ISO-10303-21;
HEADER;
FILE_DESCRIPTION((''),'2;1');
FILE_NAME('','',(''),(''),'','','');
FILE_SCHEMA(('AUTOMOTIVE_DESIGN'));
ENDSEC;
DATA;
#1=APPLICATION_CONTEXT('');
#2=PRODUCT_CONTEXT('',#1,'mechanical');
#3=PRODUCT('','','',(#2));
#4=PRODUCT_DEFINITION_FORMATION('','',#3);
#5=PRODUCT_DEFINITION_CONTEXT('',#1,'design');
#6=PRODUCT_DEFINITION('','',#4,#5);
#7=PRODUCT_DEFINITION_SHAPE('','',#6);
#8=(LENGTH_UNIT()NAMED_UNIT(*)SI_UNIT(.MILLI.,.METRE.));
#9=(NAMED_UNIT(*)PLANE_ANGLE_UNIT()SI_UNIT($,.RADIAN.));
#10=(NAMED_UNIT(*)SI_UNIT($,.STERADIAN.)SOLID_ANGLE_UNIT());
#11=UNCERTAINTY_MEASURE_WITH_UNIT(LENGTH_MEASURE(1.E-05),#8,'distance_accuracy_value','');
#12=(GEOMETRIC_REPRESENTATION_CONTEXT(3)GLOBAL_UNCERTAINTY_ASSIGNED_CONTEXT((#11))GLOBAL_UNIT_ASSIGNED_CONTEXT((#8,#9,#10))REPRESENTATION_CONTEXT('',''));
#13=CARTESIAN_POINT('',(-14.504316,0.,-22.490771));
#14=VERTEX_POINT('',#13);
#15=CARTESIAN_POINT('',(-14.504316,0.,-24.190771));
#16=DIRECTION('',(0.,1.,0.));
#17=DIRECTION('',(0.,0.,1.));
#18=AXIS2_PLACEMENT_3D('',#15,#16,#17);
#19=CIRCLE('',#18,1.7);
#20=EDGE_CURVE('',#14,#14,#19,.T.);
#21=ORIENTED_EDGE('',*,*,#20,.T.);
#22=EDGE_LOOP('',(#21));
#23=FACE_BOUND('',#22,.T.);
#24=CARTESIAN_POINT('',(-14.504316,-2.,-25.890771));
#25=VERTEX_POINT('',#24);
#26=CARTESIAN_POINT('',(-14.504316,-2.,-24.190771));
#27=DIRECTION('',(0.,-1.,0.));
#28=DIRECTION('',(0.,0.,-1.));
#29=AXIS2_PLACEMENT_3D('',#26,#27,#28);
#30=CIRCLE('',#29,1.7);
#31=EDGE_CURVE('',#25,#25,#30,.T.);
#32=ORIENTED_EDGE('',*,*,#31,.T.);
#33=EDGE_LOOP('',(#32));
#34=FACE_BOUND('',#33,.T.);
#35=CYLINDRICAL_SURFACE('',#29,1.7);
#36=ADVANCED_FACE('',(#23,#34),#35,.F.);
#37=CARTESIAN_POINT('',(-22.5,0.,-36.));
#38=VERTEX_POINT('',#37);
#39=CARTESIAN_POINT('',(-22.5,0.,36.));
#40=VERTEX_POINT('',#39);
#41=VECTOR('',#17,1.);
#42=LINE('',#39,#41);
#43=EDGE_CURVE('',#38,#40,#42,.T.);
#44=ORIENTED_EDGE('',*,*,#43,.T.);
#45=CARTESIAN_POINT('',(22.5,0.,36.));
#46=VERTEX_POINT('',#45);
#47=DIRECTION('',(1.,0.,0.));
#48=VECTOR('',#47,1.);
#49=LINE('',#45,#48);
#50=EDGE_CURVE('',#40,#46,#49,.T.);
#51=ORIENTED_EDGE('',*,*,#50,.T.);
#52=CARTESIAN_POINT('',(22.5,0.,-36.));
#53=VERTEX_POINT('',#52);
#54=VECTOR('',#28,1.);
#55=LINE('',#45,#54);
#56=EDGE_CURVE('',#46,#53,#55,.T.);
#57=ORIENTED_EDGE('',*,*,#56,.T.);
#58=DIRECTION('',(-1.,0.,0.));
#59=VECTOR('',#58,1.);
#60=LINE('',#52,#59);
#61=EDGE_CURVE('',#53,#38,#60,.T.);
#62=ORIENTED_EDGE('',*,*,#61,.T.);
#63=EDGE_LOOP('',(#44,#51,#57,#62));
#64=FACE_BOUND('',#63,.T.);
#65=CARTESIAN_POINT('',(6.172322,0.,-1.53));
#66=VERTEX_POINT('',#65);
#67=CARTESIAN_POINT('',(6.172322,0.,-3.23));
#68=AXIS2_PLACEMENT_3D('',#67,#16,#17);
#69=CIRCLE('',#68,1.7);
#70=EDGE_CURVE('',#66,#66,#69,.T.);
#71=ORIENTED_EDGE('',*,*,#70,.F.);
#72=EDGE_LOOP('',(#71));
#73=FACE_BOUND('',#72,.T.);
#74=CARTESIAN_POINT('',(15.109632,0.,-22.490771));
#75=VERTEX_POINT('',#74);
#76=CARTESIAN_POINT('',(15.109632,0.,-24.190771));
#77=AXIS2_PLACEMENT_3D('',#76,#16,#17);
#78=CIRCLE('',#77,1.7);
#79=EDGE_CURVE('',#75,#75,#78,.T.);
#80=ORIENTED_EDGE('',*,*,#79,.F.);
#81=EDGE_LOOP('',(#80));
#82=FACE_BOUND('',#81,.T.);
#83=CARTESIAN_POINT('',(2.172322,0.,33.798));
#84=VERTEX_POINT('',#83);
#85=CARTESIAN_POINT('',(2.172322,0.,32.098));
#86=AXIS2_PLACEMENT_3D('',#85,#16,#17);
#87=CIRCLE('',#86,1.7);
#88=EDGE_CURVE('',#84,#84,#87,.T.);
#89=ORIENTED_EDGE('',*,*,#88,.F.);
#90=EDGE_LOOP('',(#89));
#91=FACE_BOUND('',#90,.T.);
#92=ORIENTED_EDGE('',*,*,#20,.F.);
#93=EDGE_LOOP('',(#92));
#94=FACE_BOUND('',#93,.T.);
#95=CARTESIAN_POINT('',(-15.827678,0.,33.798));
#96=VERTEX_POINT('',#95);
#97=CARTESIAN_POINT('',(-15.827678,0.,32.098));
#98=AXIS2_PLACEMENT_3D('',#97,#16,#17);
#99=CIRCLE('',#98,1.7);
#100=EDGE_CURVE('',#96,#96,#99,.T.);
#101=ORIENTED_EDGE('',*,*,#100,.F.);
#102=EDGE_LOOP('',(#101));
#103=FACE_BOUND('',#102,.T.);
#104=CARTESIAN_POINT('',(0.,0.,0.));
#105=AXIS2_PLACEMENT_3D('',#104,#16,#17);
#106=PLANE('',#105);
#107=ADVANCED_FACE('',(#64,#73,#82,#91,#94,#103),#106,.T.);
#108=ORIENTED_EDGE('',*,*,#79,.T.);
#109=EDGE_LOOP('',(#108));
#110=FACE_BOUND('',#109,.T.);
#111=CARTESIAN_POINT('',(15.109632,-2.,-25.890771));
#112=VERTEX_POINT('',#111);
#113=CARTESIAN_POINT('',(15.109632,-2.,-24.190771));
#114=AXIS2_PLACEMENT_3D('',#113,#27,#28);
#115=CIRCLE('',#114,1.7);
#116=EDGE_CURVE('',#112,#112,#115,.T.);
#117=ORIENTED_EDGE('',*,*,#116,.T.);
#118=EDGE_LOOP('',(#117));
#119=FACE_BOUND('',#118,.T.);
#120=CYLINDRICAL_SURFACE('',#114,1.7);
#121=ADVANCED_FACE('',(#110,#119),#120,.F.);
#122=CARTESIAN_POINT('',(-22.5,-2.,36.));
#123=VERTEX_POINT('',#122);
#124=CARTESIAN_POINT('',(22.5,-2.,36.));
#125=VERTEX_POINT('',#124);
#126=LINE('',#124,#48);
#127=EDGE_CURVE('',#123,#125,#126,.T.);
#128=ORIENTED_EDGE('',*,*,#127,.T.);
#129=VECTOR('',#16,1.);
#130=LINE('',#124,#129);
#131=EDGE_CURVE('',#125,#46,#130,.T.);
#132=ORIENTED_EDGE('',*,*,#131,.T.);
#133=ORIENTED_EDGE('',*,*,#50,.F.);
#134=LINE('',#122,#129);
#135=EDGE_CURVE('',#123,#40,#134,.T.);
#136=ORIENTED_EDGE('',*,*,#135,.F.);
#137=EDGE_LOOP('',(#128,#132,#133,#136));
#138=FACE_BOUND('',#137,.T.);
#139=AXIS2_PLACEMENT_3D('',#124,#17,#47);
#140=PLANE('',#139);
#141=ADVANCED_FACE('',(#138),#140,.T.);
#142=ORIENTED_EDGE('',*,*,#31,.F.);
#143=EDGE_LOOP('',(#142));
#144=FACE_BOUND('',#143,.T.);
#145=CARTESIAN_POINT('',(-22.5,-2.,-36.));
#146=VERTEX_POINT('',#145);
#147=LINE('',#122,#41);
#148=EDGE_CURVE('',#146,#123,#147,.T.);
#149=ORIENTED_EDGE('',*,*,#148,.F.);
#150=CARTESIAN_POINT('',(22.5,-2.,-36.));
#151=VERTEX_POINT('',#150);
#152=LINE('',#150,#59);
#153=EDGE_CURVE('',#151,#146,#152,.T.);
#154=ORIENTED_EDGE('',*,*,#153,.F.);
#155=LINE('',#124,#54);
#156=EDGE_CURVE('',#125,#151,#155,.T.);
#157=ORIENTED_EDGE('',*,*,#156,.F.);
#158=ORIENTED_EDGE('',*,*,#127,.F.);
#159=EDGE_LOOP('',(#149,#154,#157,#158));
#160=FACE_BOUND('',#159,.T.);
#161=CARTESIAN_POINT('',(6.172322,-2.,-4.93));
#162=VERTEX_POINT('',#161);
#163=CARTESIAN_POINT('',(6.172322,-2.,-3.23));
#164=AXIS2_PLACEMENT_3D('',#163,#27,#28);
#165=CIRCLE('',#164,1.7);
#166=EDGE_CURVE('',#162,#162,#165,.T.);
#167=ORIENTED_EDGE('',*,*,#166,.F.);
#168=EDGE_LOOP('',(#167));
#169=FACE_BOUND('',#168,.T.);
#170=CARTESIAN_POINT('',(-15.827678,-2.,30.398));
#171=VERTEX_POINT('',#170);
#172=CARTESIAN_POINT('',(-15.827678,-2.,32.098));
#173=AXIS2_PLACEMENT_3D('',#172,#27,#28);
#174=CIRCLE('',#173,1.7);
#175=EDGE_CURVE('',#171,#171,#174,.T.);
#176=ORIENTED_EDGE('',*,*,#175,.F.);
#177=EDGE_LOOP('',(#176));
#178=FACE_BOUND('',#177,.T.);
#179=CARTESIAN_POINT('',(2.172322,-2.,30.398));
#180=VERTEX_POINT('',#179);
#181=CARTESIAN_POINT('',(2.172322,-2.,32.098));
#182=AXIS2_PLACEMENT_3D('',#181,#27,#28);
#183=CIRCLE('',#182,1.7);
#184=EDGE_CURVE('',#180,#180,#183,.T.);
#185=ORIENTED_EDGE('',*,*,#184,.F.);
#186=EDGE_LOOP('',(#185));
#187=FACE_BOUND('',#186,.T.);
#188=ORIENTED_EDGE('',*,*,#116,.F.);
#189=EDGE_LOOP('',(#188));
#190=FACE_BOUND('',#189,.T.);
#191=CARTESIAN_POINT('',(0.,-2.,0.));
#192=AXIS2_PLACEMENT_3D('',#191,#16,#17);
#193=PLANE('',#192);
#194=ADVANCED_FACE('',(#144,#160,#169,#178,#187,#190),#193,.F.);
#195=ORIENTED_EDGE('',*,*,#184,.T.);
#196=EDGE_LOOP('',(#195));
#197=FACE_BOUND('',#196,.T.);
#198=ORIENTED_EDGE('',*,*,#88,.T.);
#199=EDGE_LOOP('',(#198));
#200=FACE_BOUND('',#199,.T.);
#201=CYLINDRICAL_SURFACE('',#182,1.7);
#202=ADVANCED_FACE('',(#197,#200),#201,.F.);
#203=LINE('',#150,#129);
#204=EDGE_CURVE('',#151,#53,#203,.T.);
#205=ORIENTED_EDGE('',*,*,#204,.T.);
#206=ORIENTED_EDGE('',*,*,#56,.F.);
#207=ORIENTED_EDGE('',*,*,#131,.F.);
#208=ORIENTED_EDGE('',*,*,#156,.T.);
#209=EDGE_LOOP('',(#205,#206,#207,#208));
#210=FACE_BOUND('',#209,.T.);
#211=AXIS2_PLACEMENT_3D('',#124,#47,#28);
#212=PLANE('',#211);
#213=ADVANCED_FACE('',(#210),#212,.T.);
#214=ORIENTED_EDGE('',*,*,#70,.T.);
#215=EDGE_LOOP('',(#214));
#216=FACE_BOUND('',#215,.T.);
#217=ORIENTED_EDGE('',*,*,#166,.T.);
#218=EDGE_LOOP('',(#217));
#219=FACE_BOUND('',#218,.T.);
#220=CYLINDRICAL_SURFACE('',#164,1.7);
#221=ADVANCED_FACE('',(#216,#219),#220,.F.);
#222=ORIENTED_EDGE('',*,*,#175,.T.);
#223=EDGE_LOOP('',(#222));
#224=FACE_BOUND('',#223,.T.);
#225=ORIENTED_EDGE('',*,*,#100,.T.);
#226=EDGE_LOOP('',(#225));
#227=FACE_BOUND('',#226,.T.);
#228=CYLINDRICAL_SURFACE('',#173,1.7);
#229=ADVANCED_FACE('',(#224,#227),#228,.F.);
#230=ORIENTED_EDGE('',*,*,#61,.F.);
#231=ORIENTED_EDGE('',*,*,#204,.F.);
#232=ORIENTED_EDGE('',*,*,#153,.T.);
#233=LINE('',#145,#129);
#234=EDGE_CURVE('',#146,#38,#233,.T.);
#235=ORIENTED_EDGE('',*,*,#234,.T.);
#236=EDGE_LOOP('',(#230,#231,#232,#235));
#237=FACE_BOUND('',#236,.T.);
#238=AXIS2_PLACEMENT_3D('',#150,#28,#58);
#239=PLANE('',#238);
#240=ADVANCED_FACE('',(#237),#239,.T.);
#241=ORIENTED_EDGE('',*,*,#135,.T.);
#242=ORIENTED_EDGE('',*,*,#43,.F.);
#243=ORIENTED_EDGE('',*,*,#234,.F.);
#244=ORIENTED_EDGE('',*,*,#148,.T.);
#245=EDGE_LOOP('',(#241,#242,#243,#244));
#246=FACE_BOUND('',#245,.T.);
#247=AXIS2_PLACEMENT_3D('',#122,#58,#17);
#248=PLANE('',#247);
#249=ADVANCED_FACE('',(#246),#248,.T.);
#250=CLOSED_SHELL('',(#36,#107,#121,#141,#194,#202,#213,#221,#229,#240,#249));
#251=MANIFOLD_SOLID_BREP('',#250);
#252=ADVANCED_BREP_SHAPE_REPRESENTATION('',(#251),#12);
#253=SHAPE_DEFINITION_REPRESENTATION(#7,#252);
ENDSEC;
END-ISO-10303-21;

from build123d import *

# Parameters (mm, degrees)
SKETCH1_W                = 45
SKETCH1_H                = 72
BASE_FLANGE1_DEPTH       = 2
NEED_TO_REPOSITION_D     = 3.4
NEED_TO_REPOSITION_DEPTH = 12
NEED_TO_REPOSITION_TIP   = 1.021463052


# Sheet-metal steps are written as plain solids
with BuildPart() as part:
    # Sketch1 → Base-Flange1 (new body)
    with BuildSketch(Plane(origin=(0, 0, 0), x_dir=(1, 0, 0), z_dir=(0, 1, 0))):
        Rectangle(SKETCH1_W, SKETCH1_H)
    extrude(amount=-BASE_FLANGE1_DEPTH)

    # Need to Reposition
    with Locations(Plane(origin=(0, -2, 0), x_dir=(-1, 0, 0), z_dir=(0, -1, 0))):
        with Locations((-2.172321578, -32.098), (15.827678422, -32.098), (-6.172321578, 3.23), (-15.109631715, 24.190770957), (14.504316145, 24.190770957)):
            Hole(NEED_TO_REPOSITION_D / 2, depth=NEED_TO_REPOSITION_DEPTH)
            with Locations((0, 0, -(NEED_TO_REPOSITION_DEPTH + NEED_TO_REPOSITION_TIP / 2))):  # 118° drill point
                Cone(0, NEED_TO_REPOSITION_D / 2, NEED_TO_REPOSITION_TIP, mode=Mode.SUBTRACT)


solid = part.part
